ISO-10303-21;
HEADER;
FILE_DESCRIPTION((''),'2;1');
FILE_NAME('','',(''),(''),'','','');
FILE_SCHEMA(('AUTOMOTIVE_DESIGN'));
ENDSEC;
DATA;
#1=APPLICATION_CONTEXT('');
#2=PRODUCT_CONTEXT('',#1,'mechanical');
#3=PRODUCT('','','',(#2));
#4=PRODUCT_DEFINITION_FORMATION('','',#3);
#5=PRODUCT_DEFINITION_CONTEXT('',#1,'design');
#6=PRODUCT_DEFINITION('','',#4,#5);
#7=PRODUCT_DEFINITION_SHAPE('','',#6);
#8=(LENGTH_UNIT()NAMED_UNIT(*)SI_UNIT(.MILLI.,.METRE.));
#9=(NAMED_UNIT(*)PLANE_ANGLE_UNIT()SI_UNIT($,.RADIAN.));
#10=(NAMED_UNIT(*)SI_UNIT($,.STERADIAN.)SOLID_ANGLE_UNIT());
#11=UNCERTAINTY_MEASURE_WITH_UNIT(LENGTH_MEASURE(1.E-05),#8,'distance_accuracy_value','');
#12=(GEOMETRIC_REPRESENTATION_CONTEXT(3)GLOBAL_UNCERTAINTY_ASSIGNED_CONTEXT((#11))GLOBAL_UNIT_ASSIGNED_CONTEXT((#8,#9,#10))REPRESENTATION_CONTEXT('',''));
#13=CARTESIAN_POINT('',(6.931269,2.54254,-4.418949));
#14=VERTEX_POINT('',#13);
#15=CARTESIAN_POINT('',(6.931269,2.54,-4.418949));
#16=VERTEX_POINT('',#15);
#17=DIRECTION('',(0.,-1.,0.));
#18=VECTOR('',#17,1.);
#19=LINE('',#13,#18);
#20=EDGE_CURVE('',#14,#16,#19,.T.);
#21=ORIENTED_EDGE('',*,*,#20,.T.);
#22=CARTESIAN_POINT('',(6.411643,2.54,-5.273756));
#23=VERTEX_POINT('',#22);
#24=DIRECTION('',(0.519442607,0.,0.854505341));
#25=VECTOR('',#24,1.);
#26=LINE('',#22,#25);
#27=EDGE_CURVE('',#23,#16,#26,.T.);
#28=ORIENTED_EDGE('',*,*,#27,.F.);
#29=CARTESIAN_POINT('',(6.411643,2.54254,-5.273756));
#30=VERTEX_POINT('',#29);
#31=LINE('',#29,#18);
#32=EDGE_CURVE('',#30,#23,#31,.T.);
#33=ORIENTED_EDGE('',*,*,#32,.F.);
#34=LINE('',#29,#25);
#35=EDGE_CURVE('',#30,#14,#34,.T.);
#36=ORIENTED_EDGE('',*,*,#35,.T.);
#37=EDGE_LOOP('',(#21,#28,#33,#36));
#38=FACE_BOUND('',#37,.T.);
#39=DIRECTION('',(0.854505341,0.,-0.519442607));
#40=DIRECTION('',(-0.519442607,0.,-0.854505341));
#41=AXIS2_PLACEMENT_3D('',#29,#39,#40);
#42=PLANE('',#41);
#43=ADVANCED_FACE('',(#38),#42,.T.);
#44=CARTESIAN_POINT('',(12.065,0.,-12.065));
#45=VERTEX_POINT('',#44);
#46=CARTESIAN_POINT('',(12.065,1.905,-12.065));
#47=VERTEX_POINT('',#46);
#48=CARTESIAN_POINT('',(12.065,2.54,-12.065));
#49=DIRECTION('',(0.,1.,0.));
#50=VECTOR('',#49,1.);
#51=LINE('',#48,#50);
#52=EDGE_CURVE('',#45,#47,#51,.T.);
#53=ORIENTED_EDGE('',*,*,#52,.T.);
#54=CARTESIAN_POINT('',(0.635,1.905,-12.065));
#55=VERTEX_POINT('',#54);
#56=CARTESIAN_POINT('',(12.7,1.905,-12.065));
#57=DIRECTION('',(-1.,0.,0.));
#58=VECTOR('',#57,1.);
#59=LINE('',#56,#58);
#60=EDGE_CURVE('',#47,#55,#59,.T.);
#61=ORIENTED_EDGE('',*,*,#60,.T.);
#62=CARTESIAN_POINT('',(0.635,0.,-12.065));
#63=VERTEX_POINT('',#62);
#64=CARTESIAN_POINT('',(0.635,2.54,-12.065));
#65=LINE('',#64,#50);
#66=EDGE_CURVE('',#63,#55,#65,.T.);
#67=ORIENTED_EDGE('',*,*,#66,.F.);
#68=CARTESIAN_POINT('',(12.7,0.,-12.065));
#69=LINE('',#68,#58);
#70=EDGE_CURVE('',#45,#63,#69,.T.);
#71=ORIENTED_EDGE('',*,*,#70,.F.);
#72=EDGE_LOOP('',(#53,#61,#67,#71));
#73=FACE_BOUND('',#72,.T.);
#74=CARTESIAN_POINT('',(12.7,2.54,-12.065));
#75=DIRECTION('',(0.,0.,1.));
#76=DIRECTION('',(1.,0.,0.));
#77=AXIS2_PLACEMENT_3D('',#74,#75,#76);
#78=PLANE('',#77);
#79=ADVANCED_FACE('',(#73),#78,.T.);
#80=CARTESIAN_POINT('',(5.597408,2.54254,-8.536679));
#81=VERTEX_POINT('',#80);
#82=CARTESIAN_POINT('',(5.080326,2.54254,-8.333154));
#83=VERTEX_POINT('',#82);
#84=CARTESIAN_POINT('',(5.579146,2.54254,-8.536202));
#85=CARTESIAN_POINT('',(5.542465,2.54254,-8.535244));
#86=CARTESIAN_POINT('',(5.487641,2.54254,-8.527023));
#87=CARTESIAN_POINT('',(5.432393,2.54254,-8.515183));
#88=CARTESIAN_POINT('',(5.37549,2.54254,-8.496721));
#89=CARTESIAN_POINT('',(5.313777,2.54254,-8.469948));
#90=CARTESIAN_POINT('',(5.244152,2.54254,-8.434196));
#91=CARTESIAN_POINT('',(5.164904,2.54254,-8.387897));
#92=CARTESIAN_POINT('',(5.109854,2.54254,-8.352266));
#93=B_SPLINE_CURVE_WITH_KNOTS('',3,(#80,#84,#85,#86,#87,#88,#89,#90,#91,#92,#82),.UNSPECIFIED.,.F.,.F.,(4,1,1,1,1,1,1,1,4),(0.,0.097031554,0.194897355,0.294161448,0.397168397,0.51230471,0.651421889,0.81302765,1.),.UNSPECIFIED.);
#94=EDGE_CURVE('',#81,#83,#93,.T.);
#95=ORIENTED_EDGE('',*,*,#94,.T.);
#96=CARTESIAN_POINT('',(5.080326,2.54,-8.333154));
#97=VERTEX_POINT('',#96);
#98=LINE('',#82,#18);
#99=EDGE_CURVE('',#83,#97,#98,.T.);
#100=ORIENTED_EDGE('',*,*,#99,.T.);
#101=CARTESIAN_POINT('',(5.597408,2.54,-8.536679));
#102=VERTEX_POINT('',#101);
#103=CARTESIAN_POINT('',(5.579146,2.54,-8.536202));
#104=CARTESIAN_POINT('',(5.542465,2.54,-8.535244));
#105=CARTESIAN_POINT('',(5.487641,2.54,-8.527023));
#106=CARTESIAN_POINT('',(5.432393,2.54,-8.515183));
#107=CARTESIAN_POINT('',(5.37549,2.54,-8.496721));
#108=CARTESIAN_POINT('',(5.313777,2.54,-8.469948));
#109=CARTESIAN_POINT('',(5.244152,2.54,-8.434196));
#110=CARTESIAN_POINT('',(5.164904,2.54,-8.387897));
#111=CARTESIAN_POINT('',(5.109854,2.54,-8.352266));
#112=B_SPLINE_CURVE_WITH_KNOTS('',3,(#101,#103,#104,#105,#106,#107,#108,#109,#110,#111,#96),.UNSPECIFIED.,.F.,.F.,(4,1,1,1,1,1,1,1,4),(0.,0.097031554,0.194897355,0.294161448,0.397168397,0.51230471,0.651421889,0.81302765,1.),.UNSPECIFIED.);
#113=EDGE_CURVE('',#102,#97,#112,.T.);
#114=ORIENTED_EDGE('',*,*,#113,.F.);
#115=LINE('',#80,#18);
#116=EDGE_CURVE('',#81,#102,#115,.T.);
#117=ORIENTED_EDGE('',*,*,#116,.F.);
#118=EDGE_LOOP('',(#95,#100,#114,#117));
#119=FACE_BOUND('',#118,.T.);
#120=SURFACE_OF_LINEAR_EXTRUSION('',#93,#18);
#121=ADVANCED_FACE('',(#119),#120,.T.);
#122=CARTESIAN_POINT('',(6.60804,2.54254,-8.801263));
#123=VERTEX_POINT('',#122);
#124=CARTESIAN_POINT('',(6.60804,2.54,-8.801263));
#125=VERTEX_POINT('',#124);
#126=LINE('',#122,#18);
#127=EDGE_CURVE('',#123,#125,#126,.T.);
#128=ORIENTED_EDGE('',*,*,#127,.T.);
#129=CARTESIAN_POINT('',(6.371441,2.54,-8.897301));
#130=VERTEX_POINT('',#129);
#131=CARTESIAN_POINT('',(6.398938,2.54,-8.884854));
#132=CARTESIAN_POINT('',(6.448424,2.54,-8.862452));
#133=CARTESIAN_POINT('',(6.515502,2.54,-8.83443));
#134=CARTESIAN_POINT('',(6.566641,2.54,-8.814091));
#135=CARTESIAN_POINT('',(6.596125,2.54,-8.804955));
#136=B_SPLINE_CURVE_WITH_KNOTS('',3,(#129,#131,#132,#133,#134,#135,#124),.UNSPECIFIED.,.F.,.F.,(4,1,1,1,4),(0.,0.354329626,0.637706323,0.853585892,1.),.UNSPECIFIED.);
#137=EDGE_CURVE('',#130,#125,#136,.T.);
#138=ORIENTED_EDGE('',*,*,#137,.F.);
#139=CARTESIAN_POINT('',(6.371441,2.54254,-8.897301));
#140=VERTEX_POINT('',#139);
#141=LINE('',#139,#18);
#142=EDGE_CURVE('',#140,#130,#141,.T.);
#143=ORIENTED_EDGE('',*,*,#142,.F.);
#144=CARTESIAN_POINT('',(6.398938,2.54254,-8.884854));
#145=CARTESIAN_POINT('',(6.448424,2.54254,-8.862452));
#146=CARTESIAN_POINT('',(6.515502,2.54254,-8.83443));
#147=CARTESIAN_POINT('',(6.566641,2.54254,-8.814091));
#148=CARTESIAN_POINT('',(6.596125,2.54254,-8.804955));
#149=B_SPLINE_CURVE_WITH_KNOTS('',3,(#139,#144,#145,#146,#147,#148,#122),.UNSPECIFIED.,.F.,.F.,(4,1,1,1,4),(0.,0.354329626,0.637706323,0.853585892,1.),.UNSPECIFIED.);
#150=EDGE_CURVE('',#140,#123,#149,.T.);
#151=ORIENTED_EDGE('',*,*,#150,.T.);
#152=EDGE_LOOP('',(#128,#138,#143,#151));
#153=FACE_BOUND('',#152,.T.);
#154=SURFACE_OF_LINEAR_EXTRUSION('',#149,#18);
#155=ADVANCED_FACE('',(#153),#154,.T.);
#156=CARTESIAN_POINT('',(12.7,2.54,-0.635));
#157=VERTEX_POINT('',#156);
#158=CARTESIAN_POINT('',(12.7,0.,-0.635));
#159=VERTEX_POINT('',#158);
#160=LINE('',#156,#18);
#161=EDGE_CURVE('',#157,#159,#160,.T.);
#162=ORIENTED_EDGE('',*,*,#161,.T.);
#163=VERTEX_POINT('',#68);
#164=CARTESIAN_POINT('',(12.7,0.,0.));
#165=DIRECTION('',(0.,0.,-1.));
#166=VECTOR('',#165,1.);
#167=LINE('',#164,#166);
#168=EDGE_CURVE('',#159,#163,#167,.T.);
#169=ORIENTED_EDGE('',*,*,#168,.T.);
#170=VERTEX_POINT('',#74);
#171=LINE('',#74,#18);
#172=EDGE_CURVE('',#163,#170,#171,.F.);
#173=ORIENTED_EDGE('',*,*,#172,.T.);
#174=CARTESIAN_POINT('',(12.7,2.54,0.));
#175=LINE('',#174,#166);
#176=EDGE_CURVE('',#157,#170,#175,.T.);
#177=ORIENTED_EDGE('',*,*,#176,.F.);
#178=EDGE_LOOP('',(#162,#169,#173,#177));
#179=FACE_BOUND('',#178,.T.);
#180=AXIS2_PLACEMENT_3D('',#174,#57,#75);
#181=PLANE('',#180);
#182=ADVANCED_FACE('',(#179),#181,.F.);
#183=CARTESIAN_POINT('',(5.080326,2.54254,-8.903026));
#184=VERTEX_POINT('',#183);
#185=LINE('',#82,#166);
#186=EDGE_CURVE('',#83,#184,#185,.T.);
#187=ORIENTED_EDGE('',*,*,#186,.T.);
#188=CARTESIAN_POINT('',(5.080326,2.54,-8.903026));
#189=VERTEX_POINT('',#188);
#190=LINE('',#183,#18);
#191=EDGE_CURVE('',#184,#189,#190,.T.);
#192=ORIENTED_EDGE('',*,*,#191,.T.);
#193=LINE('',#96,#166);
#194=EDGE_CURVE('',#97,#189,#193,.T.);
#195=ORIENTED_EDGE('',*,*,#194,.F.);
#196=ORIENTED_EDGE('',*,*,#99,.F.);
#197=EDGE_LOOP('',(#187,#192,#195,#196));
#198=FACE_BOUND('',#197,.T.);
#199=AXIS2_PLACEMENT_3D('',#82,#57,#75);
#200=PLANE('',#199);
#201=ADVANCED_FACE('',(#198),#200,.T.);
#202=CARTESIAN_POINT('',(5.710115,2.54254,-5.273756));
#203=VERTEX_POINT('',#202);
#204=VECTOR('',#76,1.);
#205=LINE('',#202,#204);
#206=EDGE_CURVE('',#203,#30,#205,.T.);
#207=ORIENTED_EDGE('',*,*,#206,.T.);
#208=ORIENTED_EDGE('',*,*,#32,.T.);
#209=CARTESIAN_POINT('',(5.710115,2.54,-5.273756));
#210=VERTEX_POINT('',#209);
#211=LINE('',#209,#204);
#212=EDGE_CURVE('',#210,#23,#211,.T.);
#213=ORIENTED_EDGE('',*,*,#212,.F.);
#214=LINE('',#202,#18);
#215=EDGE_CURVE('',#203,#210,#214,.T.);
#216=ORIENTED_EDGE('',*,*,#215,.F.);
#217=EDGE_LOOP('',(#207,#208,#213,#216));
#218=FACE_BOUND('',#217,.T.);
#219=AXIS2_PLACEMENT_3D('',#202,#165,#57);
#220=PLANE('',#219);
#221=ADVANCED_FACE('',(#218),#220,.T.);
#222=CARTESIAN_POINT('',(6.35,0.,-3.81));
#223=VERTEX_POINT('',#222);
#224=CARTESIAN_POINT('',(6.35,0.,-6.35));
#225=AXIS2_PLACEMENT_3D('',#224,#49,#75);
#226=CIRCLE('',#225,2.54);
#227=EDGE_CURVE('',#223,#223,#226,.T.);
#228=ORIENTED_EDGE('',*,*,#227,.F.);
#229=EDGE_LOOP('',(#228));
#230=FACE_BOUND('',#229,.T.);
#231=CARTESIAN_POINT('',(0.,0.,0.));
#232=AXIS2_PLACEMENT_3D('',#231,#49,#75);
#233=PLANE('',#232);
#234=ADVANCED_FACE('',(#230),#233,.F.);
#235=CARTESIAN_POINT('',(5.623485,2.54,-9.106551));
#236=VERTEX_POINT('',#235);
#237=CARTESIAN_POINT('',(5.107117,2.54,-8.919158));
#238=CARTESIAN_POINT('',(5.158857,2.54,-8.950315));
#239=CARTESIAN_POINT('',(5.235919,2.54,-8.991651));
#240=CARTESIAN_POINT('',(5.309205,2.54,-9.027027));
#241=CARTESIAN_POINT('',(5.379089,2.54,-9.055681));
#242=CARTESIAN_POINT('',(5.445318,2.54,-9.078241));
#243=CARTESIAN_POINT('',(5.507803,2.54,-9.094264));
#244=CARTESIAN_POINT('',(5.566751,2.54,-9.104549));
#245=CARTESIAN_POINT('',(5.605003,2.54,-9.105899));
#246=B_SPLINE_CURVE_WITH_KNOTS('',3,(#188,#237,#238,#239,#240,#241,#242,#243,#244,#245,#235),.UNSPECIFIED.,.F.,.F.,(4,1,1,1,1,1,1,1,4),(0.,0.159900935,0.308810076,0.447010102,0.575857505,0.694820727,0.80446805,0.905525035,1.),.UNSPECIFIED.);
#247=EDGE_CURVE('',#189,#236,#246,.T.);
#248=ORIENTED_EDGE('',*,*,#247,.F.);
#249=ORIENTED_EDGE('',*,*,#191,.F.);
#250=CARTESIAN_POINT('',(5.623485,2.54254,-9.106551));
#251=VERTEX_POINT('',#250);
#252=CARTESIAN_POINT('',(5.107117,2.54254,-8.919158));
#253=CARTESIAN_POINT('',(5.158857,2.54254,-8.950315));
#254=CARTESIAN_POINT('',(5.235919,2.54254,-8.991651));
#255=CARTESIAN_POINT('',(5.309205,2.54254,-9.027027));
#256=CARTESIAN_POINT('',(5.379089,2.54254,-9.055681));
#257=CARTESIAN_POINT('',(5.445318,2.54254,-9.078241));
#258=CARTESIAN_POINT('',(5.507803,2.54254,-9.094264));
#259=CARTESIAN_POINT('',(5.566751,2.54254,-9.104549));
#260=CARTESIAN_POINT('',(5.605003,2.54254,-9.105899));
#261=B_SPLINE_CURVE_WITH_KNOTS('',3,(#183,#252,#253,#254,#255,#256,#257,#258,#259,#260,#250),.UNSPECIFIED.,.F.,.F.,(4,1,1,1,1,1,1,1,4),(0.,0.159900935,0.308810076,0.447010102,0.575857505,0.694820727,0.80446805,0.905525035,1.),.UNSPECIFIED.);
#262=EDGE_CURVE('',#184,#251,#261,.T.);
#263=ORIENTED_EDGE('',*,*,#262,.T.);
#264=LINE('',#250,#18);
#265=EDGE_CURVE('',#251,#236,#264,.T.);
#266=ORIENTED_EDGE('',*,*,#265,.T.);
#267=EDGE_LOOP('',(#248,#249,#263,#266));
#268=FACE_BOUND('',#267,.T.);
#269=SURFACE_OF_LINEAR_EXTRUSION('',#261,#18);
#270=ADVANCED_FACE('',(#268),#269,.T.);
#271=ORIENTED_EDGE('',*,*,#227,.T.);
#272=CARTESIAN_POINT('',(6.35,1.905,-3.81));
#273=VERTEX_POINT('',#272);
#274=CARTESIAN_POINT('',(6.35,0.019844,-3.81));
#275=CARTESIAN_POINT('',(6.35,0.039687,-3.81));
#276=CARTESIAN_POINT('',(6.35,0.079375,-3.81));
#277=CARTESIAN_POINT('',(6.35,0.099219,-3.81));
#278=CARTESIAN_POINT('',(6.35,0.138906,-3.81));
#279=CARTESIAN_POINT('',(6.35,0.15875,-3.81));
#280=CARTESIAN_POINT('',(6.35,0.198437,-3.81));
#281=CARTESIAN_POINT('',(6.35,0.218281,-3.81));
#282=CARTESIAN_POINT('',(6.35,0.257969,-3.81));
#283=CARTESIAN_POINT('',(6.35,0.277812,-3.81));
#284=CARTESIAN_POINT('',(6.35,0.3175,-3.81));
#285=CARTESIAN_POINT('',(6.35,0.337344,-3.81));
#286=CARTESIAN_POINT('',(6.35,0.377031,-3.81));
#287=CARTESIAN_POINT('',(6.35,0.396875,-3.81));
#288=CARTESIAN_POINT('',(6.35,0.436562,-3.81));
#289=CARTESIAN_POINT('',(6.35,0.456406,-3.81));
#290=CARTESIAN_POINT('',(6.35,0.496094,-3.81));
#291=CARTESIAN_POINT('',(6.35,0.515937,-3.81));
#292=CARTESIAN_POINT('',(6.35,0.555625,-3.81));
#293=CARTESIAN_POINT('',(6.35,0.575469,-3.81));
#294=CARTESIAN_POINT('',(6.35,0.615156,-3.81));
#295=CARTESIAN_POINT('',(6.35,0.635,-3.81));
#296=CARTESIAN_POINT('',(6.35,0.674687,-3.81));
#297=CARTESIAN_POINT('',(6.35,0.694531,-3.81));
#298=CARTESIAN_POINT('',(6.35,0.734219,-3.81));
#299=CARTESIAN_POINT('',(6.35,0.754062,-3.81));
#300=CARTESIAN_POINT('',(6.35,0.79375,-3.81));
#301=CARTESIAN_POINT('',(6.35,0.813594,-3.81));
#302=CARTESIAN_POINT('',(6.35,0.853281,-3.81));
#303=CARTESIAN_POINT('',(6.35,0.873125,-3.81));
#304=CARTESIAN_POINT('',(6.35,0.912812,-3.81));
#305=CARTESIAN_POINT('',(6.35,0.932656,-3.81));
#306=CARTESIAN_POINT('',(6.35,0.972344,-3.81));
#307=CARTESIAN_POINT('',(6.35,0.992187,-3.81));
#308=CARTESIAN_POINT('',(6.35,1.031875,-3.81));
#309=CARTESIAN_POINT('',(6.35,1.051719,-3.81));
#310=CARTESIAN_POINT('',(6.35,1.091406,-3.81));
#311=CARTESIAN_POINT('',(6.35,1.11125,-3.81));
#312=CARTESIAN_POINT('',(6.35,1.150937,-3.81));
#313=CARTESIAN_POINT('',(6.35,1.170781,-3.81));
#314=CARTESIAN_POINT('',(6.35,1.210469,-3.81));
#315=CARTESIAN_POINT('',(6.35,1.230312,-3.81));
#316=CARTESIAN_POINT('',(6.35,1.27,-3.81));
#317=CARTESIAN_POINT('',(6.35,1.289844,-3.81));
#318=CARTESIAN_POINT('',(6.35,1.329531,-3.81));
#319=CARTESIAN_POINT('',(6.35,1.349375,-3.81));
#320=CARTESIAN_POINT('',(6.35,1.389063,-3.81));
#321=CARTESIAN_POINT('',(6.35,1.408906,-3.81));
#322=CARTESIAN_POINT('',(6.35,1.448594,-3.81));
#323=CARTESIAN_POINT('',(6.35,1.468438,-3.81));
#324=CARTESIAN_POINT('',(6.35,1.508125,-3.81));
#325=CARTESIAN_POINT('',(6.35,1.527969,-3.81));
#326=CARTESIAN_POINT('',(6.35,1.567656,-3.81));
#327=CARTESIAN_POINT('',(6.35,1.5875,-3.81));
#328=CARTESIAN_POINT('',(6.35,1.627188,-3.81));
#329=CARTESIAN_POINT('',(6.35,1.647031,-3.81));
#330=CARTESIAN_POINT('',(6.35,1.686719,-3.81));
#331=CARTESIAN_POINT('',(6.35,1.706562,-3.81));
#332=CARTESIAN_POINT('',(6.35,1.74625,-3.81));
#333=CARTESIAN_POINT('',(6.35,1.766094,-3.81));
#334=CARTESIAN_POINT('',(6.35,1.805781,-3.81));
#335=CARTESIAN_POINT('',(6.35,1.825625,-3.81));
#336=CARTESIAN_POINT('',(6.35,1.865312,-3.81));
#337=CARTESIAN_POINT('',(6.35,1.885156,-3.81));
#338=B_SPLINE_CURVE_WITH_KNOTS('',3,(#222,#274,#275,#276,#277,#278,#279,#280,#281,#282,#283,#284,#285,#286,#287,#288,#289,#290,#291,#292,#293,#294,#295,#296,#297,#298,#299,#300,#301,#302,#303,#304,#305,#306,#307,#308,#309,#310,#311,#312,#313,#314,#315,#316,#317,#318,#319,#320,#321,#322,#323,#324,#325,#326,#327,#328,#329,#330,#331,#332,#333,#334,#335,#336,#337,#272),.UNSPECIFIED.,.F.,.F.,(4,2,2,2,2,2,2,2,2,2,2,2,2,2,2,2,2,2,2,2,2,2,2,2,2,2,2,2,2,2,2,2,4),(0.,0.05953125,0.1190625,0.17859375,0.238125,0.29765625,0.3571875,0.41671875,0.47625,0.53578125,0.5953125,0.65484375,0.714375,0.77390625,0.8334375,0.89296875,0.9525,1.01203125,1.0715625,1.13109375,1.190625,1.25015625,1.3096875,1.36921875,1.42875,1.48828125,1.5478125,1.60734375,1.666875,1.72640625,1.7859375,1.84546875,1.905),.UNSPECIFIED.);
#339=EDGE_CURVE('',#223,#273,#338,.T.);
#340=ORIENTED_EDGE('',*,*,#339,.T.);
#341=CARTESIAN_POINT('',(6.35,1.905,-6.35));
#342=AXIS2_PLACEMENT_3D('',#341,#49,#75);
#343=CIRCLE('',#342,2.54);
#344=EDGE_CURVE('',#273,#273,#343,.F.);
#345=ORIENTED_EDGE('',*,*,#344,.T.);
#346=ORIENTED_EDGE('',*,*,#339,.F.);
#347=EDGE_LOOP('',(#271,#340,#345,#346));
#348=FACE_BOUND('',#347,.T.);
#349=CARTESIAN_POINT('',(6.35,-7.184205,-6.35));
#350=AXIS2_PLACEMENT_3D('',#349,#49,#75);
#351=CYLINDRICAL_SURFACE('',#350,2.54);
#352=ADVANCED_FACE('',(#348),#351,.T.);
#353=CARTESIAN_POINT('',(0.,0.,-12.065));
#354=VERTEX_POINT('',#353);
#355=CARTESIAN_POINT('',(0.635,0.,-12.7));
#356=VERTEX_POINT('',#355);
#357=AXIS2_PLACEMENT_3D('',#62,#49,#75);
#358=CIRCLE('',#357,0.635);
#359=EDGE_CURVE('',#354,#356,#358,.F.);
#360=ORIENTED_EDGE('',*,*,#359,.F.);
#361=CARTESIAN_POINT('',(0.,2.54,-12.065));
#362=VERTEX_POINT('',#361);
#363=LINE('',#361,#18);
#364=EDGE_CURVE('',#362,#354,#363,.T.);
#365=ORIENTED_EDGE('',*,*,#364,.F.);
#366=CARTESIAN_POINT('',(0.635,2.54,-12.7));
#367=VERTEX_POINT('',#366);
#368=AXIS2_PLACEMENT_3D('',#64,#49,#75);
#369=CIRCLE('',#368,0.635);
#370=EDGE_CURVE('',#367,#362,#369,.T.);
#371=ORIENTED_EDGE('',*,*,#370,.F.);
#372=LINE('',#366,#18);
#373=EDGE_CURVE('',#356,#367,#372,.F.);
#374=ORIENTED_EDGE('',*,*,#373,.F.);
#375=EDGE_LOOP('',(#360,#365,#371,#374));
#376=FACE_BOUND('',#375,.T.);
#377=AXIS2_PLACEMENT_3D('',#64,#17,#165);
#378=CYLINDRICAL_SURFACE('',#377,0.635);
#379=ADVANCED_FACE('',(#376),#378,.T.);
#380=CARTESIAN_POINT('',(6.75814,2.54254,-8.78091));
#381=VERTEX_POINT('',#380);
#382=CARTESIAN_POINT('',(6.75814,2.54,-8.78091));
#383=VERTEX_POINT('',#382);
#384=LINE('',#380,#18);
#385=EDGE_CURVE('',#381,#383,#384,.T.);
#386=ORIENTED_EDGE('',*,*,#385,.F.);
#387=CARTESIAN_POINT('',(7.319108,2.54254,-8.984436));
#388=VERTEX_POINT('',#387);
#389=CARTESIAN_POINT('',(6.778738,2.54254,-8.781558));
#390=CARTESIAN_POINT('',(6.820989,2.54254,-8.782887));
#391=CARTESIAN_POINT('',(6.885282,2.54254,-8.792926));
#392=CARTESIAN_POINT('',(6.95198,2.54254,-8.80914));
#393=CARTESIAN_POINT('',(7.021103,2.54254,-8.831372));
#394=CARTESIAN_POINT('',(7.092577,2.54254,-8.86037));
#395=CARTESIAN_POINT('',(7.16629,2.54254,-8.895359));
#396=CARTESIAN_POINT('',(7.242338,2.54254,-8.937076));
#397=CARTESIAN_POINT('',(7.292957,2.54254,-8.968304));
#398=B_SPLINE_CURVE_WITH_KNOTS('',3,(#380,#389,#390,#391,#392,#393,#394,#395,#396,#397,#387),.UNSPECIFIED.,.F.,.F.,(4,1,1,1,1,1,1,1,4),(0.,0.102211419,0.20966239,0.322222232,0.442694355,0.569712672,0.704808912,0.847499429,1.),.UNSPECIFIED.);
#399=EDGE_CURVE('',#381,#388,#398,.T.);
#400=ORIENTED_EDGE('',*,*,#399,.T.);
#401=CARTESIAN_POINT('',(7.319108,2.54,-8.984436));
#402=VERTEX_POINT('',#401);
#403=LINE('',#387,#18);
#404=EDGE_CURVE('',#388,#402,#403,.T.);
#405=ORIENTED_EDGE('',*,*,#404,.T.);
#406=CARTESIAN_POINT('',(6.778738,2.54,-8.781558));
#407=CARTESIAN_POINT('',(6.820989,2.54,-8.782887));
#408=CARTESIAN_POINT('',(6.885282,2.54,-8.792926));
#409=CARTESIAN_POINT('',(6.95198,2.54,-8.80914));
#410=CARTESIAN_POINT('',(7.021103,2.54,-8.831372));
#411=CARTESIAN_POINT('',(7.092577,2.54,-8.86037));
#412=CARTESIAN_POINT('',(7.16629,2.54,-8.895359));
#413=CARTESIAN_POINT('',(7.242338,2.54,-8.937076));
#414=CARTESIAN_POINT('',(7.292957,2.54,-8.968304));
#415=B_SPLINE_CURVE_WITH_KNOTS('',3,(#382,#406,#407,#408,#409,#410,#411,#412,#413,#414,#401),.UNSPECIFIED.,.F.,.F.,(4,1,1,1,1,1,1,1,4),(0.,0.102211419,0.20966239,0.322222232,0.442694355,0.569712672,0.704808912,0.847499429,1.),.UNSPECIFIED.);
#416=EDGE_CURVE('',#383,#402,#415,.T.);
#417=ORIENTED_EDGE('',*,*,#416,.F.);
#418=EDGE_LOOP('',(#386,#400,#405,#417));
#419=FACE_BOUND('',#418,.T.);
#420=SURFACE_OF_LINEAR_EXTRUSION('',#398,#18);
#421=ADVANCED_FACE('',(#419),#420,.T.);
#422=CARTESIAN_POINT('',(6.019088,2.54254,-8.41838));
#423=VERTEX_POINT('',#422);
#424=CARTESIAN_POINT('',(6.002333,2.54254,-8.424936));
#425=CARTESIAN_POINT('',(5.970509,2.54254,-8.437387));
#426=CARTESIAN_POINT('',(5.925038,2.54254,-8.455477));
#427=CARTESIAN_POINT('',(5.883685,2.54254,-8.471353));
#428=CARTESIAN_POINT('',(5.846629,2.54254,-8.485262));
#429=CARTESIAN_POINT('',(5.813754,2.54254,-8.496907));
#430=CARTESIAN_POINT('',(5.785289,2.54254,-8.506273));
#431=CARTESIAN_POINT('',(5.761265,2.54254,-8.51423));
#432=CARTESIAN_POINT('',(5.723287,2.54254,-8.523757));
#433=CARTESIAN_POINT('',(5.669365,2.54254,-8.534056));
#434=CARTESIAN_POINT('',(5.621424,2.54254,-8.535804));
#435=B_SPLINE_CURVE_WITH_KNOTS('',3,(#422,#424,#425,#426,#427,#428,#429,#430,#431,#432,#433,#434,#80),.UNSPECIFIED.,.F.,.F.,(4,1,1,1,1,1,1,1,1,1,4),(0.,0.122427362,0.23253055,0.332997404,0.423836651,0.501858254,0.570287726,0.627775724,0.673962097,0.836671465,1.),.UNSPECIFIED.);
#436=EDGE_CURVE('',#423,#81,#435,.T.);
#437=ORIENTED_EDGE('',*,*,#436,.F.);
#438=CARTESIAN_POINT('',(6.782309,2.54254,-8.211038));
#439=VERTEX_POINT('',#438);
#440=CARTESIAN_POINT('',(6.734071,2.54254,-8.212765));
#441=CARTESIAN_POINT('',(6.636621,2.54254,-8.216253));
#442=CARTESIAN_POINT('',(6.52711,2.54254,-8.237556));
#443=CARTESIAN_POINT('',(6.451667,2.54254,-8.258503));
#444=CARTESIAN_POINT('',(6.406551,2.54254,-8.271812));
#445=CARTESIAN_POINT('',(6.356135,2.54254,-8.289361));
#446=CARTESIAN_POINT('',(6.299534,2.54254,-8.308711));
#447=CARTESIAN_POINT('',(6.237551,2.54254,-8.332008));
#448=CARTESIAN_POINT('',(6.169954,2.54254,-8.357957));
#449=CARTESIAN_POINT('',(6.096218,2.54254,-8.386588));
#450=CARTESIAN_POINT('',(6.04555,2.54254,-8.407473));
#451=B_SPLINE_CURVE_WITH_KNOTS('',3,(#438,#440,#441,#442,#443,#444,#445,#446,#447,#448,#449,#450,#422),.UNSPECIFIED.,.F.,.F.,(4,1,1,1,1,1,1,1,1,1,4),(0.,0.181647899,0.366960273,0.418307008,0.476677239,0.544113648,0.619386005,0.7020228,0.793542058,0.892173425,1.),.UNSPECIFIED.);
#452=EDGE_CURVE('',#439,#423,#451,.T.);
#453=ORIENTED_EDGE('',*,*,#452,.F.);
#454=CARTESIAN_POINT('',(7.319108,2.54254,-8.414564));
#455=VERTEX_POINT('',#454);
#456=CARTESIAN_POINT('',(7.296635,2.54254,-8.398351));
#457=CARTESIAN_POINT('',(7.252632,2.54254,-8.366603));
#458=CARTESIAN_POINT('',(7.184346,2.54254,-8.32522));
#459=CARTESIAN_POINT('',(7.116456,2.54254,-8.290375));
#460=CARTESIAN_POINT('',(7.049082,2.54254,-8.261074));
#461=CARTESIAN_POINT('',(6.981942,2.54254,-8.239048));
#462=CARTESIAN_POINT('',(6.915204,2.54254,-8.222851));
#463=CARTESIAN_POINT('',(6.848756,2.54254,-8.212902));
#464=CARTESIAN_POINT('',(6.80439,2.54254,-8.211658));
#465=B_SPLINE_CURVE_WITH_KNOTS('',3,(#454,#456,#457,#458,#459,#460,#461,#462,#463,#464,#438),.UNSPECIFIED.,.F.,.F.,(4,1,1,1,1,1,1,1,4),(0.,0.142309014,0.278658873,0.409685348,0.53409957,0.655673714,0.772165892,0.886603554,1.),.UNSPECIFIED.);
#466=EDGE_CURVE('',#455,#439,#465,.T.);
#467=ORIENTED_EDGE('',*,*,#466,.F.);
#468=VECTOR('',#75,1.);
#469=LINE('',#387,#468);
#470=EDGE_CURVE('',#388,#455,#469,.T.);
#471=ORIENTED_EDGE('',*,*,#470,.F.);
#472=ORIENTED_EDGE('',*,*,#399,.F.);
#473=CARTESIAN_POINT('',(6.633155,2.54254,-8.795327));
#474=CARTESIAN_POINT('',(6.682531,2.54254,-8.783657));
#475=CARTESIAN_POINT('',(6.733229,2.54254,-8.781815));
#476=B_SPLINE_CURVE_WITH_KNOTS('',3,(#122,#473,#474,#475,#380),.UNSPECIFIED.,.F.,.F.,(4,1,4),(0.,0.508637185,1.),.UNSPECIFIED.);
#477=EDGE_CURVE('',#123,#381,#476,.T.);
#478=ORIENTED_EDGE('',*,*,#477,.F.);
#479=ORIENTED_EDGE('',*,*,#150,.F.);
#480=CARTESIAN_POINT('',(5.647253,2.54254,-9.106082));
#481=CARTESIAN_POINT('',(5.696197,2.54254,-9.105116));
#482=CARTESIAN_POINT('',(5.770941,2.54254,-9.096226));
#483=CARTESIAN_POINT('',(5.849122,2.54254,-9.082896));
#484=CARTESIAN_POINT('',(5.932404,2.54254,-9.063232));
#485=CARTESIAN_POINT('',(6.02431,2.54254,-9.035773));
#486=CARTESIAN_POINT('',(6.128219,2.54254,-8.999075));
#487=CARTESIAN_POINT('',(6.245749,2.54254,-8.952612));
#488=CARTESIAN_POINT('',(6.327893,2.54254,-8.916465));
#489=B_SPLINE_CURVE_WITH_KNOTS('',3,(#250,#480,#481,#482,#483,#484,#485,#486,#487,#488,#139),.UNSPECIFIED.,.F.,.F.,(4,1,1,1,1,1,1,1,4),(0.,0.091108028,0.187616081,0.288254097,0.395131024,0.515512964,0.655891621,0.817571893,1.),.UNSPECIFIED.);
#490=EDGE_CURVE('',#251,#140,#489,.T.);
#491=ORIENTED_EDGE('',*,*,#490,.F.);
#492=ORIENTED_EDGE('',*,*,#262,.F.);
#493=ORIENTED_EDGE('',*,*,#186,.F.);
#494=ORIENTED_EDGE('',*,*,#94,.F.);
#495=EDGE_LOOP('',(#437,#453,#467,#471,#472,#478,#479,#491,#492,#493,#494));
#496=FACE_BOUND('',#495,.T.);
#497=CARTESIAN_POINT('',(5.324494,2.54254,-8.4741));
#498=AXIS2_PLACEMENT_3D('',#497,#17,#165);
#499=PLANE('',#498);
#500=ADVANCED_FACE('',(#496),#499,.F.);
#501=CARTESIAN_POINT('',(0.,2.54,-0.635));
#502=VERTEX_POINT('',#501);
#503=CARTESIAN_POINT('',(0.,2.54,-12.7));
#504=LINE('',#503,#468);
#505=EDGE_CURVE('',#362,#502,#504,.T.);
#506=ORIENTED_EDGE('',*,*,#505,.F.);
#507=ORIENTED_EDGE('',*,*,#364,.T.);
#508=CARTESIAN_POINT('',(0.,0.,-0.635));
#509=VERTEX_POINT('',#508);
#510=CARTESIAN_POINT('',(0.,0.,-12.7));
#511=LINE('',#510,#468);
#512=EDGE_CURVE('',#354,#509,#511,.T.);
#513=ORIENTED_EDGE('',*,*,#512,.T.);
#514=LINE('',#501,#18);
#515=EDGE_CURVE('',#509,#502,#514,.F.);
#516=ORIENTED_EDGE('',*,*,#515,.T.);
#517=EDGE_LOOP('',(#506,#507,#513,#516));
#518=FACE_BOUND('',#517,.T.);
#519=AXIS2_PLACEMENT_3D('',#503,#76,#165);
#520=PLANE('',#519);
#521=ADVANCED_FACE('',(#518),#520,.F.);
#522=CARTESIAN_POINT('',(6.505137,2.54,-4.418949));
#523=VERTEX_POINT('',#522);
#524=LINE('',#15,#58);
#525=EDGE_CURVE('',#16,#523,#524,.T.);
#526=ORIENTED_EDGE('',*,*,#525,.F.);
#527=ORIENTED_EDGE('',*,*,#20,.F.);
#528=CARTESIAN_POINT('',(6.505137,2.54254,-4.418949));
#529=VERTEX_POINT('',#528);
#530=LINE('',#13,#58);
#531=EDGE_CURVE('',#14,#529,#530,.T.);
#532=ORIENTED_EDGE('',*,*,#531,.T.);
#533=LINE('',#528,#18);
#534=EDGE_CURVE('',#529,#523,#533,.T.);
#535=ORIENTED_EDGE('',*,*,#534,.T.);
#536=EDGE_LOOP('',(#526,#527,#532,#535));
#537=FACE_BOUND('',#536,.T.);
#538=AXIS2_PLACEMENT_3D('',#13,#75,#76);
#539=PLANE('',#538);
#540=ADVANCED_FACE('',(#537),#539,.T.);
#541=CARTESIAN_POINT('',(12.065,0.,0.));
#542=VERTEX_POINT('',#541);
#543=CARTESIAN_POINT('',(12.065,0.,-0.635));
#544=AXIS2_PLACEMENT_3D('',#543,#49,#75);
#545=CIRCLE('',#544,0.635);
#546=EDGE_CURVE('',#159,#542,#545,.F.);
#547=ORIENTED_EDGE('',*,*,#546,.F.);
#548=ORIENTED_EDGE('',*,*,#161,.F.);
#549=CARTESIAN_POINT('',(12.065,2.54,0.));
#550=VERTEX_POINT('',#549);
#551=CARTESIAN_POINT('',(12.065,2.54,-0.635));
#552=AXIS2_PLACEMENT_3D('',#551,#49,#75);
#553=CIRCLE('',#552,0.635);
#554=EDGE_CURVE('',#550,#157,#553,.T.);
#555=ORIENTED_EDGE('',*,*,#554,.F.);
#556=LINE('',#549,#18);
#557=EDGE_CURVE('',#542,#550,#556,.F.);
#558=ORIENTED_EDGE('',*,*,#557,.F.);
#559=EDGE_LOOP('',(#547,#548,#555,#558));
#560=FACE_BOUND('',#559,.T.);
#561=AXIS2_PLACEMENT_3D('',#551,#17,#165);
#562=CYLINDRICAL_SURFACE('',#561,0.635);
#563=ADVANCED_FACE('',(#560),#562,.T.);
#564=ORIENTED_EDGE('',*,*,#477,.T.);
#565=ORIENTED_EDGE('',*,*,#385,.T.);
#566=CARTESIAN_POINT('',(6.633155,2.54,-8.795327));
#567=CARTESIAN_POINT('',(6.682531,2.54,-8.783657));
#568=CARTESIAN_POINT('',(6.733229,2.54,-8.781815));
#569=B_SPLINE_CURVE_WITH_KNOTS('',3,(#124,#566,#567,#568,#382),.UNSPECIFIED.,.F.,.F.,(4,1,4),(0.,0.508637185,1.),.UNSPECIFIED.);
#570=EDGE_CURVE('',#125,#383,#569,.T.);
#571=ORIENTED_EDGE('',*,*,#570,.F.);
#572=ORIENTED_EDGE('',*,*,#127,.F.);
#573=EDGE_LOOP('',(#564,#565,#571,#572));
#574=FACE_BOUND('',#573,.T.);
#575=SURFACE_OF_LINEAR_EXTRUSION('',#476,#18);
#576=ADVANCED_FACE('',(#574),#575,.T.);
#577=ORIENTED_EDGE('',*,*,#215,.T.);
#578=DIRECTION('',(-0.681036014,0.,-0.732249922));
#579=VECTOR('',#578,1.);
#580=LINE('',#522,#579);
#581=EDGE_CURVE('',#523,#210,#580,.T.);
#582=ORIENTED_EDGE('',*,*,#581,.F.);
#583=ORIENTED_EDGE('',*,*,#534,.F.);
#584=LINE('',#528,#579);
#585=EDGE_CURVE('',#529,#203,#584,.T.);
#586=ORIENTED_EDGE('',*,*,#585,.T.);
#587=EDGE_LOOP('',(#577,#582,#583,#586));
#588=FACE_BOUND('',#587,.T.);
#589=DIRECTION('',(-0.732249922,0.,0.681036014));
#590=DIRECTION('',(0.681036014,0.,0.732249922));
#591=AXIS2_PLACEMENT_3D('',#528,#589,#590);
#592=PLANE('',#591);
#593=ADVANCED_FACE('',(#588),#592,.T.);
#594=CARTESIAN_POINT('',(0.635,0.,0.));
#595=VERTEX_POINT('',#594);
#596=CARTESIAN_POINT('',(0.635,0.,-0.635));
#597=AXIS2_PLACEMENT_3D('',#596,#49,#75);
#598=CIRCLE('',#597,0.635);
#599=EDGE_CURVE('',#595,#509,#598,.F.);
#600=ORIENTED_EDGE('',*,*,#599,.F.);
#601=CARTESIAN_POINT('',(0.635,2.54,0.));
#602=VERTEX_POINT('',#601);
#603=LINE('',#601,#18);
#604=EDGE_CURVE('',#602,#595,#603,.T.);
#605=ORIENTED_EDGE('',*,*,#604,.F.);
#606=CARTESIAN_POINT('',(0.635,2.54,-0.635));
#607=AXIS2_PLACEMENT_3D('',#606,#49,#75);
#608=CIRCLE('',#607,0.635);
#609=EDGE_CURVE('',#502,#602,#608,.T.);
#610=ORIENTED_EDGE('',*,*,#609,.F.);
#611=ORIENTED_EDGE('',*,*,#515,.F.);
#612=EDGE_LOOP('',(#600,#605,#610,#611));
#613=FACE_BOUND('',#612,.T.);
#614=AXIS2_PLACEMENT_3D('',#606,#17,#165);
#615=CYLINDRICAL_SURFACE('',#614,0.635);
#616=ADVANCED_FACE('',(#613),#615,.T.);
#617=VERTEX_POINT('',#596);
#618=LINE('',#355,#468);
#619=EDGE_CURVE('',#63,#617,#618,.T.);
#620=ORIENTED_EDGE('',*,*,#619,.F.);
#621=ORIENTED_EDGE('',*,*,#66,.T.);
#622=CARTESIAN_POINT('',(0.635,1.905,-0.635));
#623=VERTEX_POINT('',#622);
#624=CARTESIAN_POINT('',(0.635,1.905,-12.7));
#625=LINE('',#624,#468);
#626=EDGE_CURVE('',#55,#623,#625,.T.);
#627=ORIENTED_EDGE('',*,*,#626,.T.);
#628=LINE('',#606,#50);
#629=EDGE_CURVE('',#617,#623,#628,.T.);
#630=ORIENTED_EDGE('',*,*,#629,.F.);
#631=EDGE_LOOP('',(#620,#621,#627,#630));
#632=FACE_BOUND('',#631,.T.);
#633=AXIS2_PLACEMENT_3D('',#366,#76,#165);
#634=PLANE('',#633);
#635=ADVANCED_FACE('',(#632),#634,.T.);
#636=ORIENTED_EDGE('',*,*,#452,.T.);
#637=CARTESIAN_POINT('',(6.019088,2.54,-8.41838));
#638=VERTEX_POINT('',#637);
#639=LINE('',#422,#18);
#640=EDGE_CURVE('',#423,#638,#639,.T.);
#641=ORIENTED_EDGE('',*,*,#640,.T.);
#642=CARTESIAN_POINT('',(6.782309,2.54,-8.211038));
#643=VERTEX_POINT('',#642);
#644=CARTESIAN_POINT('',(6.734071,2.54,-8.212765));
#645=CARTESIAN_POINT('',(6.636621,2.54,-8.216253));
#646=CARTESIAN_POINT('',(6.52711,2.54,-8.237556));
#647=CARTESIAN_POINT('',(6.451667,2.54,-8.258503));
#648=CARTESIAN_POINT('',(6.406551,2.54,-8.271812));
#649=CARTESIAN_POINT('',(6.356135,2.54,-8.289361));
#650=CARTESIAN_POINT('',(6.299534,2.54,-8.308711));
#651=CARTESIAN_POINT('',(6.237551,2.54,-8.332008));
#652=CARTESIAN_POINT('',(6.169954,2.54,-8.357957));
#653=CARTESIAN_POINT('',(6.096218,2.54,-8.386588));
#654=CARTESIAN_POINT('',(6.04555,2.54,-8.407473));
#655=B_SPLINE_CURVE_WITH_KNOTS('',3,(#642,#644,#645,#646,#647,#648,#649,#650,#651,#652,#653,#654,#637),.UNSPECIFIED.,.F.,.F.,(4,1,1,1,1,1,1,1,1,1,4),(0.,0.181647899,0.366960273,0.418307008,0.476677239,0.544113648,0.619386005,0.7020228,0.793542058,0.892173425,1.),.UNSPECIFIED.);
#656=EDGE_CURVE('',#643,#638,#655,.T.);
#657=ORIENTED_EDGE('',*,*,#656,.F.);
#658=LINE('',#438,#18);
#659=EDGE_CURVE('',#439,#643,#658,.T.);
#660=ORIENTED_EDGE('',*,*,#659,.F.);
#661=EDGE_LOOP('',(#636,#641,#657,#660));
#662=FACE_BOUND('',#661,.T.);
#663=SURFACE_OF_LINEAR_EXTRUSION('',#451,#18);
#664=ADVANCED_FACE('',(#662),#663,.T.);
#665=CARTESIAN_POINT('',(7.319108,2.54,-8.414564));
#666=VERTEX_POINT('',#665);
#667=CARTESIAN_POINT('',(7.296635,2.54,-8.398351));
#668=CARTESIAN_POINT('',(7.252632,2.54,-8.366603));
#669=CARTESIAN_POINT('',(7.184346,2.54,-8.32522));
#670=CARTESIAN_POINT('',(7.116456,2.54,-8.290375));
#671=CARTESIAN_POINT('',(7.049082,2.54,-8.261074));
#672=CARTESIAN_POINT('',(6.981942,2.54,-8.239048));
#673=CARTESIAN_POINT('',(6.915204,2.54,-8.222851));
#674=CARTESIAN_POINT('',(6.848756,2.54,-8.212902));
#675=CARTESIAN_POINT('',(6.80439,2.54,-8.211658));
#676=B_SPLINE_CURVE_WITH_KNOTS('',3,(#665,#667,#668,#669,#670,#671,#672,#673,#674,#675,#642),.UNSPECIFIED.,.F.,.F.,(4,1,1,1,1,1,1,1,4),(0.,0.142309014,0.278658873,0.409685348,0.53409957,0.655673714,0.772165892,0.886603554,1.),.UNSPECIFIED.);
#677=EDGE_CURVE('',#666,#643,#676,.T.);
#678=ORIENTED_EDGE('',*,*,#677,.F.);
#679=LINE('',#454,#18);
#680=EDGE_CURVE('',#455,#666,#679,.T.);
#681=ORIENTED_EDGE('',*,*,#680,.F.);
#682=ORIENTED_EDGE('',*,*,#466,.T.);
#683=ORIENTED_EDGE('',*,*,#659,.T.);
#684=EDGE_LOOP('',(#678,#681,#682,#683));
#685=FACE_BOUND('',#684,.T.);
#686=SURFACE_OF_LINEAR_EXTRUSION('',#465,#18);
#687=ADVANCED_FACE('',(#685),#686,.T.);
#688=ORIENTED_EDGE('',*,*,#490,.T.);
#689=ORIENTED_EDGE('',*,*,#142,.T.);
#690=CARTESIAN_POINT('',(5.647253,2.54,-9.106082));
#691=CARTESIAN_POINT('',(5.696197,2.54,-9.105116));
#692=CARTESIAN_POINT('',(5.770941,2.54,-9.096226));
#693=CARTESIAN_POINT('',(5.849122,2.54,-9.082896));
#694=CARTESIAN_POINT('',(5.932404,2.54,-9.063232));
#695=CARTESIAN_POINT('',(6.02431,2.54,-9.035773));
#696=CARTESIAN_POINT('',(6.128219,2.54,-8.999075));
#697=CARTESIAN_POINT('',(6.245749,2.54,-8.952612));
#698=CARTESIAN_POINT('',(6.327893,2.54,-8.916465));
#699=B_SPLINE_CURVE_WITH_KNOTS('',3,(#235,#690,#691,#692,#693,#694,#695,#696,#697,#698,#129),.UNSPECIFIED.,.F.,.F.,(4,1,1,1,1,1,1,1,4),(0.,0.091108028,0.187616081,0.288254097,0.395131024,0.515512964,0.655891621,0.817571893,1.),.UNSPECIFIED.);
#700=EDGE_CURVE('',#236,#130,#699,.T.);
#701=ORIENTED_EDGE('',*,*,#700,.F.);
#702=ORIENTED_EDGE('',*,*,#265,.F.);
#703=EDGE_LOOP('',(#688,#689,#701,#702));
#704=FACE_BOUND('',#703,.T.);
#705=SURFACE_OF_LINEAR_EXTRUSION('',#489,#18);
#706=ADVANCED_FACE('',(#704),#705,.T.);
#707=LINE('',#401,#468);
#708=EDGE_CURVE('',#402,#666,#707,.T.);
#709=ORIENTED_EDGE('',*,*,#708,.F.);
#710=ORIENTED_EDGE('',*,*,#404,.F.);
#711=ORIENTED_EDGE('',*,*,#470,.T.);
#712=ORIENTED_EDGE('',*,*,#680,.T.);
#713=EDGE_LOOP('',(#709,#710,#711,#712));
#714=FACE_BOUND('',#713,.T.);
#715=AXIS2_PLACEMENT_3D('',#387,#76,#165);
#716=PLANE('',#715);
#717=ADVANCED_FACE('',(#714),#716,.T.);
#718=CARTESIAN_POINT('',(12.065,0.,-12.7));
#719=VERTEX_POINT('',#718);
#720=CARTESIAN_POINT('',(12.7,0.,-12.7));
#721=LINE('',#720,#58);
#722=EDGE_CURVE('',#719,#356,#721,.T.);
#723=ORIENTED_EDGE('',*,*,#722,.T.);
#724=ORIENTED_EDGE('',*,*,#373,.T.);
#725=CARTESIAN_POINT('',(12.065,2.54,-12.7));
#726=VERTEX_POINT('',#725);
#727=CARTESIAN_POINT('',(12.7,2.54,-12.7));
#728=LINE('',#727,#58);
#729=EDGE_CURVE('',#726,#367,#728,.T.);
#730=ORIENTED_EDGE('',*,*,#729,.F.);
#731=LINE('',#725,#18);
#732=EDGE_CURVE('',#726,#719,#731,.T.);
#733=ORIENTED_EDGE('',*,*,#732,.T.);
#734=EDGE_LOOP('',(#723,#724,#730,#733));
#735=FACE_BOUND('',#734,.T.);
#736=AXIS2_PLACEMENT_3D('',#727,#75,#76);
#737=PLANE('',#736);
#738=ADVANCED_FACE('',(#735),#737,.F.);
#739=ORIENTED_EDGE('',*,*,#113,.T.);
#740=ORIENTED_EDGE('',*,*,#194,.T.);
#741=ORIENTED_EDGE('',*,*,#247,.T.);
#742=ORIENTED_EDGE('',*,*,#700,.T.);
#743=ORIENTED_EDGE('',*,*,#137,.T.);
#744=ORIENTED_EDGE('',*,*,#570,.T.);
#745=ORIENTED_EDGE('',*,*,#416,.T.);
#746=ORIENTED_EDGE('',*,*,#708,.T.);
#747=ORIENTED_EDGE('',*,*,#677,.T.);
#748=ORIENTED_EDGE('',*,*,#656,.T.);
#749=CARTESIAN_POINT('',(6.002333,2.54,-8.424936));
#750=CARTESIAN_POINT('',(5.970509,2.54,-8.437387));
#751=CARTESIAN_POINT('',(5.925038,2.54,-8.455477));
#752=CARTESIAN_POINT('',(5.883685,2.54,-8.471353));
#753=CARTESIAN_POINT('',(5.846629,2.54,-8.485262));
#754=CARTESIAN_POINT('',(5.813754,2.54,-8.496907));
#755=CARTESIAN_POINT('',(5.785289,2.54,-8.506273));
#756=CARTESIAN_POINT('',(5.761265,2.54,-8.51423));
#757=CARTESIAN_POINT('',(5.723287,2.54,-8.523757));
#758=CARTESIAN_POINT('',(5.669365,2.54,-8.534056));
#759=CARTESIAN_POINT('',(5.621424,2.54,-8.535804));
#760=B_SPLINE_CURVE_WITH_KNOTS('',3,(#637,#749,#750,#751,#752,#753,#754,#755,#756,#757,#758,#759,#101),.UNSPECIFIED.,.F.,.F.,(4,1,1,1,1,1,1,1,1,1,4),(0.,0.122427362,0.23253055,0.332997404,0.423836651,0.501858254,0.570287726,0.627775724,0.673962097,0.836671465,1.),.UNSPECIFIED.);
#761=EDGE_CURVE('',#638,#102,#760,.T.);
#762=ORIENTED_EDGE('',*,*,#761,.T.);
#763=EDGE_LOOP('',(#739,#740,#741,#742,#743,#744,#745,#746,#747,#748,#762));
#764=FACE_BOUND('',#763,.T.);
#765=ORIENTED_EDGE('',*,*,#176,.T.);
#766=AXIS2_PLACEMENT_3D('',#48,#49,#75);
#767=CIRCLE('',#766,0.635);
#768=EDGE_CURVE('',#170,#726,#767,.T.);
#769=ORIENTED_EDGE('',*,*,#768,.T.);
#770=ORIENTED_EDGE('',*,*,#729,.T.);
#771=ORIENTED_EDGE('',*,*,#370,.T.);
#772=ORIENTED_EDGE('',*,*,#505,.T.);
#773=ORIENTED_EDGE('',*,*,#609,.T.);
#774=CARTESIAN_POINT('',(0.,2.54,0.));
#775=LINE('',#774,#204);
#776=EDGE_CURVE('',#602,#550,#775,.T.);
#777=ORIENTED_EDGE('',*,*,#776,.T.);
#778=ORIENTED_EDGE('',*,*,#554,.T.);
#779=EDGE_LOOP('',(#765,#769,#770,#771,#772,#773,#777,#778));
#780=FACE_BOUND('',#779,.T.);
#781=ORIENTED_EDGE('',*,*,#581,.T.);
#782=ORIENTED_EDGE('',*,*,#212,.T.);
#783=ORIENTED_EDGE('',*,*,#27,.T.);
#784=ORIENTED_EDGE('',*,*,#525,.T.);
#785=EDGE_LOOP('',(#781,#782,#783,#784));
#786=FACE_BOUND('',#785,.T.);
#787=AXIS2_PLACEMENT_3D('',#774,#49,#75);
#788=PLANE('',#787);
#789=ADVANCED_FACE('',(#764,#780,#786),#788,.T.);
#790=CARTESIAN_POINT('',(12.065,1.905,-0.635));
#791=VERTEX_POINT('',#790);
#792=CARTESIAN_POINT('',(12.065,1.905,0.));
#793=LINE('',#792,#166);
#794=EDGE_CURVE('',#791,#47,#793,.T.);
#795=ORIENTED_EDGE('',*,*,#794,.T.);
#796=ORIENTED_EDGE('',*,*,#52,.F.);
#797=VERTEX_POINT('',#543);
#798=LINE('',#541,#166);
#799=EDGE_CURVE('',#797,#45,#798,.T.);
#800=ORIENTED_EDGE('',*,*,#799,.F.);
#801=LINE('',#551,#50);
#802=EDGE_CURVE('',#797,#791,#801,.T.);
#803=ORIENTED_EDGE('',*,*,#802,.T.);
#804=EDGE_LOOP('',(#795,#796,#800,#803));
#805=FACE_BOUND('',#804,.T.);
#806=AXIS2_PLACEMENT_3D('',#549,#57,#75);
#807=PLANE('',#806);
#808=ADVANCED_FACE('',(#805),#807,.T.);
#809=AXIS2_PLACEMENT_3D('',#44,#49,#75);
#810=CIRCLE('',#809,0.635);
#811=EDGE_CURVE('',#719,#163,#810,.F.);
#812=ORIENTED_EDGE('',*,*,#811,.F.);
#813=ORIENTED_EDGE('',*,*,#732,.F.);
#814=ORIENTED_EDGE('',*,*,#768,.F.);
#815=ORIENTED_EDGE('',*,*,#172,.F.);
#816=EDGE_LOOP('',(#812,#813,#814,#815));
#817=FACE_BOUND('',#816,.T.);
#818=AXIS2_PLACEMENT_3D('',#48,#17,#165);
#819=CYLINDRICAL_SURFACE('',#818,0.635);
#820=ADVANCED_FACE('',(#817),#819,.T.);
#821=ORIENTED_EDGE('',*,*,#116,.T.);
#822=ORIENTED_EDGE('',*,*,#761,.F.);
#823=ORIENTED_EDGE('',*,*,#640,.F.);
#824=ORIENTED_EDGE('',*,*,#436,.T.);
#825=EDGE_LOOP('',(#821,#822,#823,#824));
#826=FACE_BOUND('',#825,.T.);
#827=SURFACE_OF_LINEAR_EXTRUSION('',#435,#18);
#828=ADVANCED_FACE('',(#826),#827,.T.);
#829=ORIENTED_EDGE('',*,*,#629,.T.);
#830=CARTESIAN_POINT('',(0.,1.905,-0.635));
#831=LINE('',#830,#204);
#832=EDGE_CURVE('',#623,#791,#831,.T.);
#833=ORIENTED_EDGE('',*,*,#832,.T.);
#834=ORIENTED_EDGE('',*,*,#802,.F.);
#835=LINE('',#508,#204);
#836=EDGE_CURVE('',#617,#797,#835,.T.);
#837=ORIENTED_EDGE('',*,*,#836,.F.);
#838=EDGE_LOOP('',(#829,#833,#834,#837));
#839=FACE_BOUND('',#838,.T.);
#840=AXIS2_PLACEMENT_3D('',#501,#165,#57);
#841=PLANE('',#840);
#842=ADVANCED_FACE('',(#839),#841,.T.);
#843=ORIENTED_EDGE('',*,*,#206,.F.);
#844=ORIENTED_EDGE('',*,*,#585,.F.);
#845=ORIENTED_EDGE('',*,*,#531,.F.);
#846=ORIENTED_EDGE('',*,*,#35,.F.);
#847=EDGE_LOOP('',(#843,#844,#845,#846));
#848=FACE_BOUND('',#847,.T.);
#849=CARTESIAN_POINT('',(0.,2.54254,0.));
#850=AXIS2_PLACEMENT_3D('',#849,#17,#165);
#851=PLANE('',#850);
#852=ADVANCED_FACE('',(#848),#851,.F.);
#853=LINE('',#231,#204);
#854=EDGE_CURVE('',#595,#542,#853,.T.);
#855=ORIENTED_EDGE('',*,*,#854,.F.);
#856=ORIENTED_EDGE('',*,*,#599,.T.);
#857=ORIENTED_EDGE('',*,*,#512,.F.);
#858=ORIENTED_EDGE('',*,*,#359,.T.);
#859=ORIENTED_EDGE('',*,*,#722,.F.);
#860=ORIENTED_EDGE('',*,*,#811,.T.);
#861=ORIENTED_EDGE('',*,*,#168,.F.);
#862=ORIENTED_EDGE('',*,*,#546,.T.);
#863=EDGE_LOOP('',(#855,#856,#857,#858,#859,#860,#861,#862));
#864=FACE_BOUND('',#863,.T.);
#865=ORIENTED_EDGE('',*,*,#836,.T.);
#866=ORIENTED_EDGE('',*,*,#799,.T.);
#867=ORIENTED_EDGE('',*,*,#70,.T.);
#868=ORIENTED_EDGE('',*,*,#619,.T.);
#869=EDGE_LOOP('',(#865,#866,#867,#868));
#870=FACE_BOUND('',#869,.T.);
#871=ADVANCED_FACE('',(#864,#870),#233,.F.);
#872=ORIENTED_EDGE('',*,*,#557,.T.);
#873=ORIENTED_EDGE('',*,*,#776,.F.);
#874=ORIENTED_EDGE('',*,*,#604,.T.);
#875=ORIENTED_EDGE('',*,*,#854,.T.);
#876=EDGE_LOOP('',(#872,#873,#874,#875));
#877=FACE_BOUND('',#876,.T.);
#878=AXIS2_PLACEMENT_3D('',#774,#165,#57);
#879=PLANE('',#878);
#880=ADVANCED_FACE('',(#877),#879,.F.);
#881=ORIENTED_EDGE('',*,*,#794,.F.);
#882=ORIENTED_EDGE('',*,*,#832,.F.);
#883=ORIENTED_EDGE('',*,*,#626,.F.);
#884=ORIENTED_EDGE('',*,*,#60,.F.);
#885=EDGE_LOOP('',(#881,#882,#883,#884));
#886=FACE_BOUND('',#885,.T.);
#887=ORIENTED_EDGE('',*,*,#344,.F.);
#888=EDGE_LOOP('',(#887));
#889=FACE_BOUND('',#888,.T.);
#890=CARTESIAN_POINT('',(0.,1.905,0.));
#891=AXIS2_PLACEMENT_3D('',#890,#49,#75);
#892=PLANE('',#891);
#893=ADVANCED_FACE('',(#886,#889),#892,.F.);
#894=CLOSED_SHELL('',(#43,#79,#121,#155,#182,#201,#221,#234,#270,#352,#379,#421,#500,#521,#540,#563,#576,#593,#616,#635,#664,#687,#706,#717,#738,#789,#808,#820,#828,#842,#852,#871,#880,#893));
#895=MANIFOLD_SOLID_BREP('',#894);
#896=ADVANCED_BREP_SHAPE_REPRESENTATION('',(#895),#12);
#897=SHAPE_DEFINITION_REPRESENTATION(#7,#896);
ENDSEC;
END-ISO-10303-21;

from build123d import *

# Parameters (mm, degrees)
SKETCH1_W           = 12.7
SKETCH1_H           = 12.7
BOSS_EXTRUDE1_DEPTH = 2.54
FILLET1_R           = 0.635
SHELL1_START        = 0.635
SHELL1_OUTLINE_W    = 1.905
SHELL1_OUTLINE_H    = 11.43
SHELL1_DEPTH        = 11.43
SKETCH2_R           = 2.54
BOSS_EXTRUDE2_DEPTH = 1.905
BOSS_EXTRUDE3_DEPTH = 0.00254


# Read off the part's stored shape, not the designer's step: Shell1
with BuildPart() as part:
    # Sketch1 → Boss-Extrude1 (new body)
    with BuildSketch(Plane(origin=(0, 0, 0), x_dir=(1, 0, 0), z_dir=(0, 1, 0))):
        with Locations((6.35, 6.35)):
            Rectangle(SKETCH1_W, SKETCH1_H)
    extrude(amount=BOSS_EXTRUDE1_DEPTH)

    # Fillet1
    fillet1_edges = [part.edges().sort_by_distance(p)[0] for p in [
        (0, 1.27, -12.7),
        (12.7, 1.27, -12.7),
        (12.7, 1.27, 0),
        (0, 1.27, 0),
    ]]
    fillet(fillet1_edges, radius=FILLET1_R)

    # Shell1 outline → Shell1 (cut)
    with BuildSketch(Plane.YZ.offset(SHELL1_START)):
        with Locations((0.9525, -6.35)):
            Rectangle(SHELL1_OUTLINE_W, SHELL1_OUTLINE_H)
    extrude(amount=SHELL1_DEPTH, mode=Mode.SUBTRACT)

    # Sketch2 → Boss-Extrude2 (add)
    with BuildSketch(Plane(origin=(0, 1.905, 0), x_dir=(-1, 0, 0), z_dir=(0, -1, 0))):
        with Locations(Location((-6.35, 6.35, 0), (0, 0, 270))):
            Circle(SKETCH2_R)
    extrude(amount=BOSS_EXTRUDE2_DEPTH)

    # Sketch3 → Boss-Extrude3 (add)
    with BuildSketch(Plane(origin=(0, 2.54, 0), x_dir=(1, 0, 0), z_dir=(0, 1, 0))):
        Polygon((6.411642829, 5.27375641), (6.931269231, 4.418948718), (6.50513742, 4.418948718), (5.710115385, 5.27375641), align=None)
        with BuildLine():
            Line((5.080325641, 8.333153846), (5.080325641, 8.903025641))
            add(Edge.make_bspline(
                [(5.080325641, 8.903025641), (5.107116622, 8.919158467), (5.158856938, 8.950315128), (5.235918867, 8.991651266), (5.309205163, 9.027027273), (5.379088546, 9.055681099), (5.445318097, 9.07824066), (5.507802803, 9.094263611), (5.566750704, 9.104549048), (5.605002578, 9.105899018), (5.623484696, 9.106551282)],
                knots=[0, 0, 0, 0, 1.279207482, 2.470480605, 3.576080812, 4.606860037, 5.558565817, 6.435744397, 7.244200283, 8, 8, 8, 8], degree=3))
            add(Edge.make_bspline(
                [(5.623484696, 9.106551282), (5.647252633, 9.10608216), (5.696197248, 9.10511611), (5.770940929, 9.096225937), (5.849121635, 9.082896049), (5.932404463, 9.063232193), (6.024309741, 9.035772523), (6.128219217, 8.999075098), (6.245748934, 8.952611932), (6.327892985, 8.91646479), (6.371441426, 8.897301482)],
                knots=[0, 0, 0, 0, 0.728864224, 1.500928647, 2.306032779, 3.161048191, 4.124103712, 5.247132966, 6.540575143, 8, 8, 8, 8], degree=3))
            add(Edge.make_bspline(
                [(6.371441426, 8.897301482), (6.398937756, 8.884854189), (6.448424397, 8.862452119), (6.515501601, 8.834429807), (6.566641046, 8.814091133), (6.596124718, 8.804955011), (6.608039984, 8.801262821)],
                knots=[0, 0, 0, 0, 1.417318505, 2.550825291, 3.414343566, 4, 4, 4, 4], degree=3))
            add(Edge.make_bspline(
                [(6.608039984, 8.801262821), (6.633154743, 8.795327171), (6.682531311, 8.783657459), (6.733229124, 8.781815384), (6.758140144, 8.780910256)],
                knots=[0, 0, 0, 0, 1.01727437, 2, 2, 2, 2], degree=3))
            add(Edge.make_bspline(
                [(6.758140144, 8.780910256), (6.778737764, 8.781558102), (6.820988878, 8.782887003), (6.885281854, 8.792925647), (6.951980152, 8.809139744), (7.021102843, 8.831372247), (7.092577195, 8.860369751), (7.166290369, 8.895358707), (7.242337948, 8.937076476), (7.292957038, 8.968303502), (7.319107692, 8.984435897)],
                knots=[0, 0, 0, 0, 0.817691354, 1.677299118, 2.577777856, 3.541554841, 4.557701377, 5.638471298, 6.779995431, 8, 8, 8, 8], degree=3))
            Line((7.319107692, 8.984435897), (7.319107692, 8.414564103))
            add(Edge.make_bspline(
                [(7.319107692, 8.414564103), (7.296635434, 8.398350673), (7.252631937, 8.366602748), (7.184346346, 8.325219904), (7.116456359, 8.290374664), (7.049081778, 8.261073651), (6.981942418, 8.239048359), (6.915204166, 8.222851078), (6.848756076, 8.21290154), (6.804390317, 8.211657593), (6.782308814, 8.211038462)],
                knots=[0, 0, 0, 0, 1.138472114, 2.229270987, 3.277482784, 4.272796559, 5.24538971, 6.177327133, 7.09282843, 8, 8, 8, 8], degree=3))
            add(Edge.make_bspline(
                [(6.782308814, 8.211038462), (6.734070736, 8.212764993), (6.636621448, 8.216252887), (6.527110127, 8.237556451), (6.451666575, 8.258503219), (6.406550833, 8.271812301), (6.356134507, 8.289361286), (6.29953379, 8.308711319), (6.237551107, 8.332007692), (6.169954271, 8.357956857), (6.096218469, 8.386587733), (6.04555015, 8.407472659), (6.01908766, 8.418380208)],
                knots=[0, 0, 0, 0, 1.816478987, 3.669602728, 4.183070076, 4.766772394, 5.441136484, 6.19386005, 7.020227999, 7.935420581, 8.921734247, 10, 10, 10, 10], degree=3))
            add(Edge.make_bspline(
                [(6.01908766, 8.418380208), (6.002332613, 8.424935618), (5.970509168, 8.437386536), (5.925038155, 8.455476927), (5.883685286, 8.471352947), (5.846629194, 8.48526161), (5.813753702, 8.496906564), (5.785288756, 8.506272562), (5.761265135, 8.514230216), (5.723286502, 8.52375686), (5.669365237, 8.534055878), (5.621424075, 8.535803844), (5.597407973, 8.536679487)],
                knots=[0, 0, 0, 0, 1.224273616, 2.325305503, 3.329974039, 4.238366513, 5.01858254, 5.702877263, 6.277757238, 6.739620974, 8.366714654, 10, 10, 10, 10], degree=3))
            add(Edge.make_bspline(
                [(5.597407973, 8.536679487), (5.579145964, 8.536202288), (5.542464937, 8.535243786), (5.487640677, 8.527022953), (5.432392514, 8.515183006), (5.375489546, 8.496720769), (5.313776653, 8.469947593), (5.24415197, 8.43419635), (5.164904001, 8.387896903), (5.109853792, 8.352265842), (5.080325641, 8.333153846)],
                knots=[0, 0, 0, 0, 0.776252433, 1.559178841, 2.353291584, 3.177347174, 4.098437677, 5.211375113, 6.504221197, 8, 8, 8, 8], degree=3))
        make_face()
    extrude(amount=BOSS_EXTRUDE3_DEPTH)


solid = part.part
